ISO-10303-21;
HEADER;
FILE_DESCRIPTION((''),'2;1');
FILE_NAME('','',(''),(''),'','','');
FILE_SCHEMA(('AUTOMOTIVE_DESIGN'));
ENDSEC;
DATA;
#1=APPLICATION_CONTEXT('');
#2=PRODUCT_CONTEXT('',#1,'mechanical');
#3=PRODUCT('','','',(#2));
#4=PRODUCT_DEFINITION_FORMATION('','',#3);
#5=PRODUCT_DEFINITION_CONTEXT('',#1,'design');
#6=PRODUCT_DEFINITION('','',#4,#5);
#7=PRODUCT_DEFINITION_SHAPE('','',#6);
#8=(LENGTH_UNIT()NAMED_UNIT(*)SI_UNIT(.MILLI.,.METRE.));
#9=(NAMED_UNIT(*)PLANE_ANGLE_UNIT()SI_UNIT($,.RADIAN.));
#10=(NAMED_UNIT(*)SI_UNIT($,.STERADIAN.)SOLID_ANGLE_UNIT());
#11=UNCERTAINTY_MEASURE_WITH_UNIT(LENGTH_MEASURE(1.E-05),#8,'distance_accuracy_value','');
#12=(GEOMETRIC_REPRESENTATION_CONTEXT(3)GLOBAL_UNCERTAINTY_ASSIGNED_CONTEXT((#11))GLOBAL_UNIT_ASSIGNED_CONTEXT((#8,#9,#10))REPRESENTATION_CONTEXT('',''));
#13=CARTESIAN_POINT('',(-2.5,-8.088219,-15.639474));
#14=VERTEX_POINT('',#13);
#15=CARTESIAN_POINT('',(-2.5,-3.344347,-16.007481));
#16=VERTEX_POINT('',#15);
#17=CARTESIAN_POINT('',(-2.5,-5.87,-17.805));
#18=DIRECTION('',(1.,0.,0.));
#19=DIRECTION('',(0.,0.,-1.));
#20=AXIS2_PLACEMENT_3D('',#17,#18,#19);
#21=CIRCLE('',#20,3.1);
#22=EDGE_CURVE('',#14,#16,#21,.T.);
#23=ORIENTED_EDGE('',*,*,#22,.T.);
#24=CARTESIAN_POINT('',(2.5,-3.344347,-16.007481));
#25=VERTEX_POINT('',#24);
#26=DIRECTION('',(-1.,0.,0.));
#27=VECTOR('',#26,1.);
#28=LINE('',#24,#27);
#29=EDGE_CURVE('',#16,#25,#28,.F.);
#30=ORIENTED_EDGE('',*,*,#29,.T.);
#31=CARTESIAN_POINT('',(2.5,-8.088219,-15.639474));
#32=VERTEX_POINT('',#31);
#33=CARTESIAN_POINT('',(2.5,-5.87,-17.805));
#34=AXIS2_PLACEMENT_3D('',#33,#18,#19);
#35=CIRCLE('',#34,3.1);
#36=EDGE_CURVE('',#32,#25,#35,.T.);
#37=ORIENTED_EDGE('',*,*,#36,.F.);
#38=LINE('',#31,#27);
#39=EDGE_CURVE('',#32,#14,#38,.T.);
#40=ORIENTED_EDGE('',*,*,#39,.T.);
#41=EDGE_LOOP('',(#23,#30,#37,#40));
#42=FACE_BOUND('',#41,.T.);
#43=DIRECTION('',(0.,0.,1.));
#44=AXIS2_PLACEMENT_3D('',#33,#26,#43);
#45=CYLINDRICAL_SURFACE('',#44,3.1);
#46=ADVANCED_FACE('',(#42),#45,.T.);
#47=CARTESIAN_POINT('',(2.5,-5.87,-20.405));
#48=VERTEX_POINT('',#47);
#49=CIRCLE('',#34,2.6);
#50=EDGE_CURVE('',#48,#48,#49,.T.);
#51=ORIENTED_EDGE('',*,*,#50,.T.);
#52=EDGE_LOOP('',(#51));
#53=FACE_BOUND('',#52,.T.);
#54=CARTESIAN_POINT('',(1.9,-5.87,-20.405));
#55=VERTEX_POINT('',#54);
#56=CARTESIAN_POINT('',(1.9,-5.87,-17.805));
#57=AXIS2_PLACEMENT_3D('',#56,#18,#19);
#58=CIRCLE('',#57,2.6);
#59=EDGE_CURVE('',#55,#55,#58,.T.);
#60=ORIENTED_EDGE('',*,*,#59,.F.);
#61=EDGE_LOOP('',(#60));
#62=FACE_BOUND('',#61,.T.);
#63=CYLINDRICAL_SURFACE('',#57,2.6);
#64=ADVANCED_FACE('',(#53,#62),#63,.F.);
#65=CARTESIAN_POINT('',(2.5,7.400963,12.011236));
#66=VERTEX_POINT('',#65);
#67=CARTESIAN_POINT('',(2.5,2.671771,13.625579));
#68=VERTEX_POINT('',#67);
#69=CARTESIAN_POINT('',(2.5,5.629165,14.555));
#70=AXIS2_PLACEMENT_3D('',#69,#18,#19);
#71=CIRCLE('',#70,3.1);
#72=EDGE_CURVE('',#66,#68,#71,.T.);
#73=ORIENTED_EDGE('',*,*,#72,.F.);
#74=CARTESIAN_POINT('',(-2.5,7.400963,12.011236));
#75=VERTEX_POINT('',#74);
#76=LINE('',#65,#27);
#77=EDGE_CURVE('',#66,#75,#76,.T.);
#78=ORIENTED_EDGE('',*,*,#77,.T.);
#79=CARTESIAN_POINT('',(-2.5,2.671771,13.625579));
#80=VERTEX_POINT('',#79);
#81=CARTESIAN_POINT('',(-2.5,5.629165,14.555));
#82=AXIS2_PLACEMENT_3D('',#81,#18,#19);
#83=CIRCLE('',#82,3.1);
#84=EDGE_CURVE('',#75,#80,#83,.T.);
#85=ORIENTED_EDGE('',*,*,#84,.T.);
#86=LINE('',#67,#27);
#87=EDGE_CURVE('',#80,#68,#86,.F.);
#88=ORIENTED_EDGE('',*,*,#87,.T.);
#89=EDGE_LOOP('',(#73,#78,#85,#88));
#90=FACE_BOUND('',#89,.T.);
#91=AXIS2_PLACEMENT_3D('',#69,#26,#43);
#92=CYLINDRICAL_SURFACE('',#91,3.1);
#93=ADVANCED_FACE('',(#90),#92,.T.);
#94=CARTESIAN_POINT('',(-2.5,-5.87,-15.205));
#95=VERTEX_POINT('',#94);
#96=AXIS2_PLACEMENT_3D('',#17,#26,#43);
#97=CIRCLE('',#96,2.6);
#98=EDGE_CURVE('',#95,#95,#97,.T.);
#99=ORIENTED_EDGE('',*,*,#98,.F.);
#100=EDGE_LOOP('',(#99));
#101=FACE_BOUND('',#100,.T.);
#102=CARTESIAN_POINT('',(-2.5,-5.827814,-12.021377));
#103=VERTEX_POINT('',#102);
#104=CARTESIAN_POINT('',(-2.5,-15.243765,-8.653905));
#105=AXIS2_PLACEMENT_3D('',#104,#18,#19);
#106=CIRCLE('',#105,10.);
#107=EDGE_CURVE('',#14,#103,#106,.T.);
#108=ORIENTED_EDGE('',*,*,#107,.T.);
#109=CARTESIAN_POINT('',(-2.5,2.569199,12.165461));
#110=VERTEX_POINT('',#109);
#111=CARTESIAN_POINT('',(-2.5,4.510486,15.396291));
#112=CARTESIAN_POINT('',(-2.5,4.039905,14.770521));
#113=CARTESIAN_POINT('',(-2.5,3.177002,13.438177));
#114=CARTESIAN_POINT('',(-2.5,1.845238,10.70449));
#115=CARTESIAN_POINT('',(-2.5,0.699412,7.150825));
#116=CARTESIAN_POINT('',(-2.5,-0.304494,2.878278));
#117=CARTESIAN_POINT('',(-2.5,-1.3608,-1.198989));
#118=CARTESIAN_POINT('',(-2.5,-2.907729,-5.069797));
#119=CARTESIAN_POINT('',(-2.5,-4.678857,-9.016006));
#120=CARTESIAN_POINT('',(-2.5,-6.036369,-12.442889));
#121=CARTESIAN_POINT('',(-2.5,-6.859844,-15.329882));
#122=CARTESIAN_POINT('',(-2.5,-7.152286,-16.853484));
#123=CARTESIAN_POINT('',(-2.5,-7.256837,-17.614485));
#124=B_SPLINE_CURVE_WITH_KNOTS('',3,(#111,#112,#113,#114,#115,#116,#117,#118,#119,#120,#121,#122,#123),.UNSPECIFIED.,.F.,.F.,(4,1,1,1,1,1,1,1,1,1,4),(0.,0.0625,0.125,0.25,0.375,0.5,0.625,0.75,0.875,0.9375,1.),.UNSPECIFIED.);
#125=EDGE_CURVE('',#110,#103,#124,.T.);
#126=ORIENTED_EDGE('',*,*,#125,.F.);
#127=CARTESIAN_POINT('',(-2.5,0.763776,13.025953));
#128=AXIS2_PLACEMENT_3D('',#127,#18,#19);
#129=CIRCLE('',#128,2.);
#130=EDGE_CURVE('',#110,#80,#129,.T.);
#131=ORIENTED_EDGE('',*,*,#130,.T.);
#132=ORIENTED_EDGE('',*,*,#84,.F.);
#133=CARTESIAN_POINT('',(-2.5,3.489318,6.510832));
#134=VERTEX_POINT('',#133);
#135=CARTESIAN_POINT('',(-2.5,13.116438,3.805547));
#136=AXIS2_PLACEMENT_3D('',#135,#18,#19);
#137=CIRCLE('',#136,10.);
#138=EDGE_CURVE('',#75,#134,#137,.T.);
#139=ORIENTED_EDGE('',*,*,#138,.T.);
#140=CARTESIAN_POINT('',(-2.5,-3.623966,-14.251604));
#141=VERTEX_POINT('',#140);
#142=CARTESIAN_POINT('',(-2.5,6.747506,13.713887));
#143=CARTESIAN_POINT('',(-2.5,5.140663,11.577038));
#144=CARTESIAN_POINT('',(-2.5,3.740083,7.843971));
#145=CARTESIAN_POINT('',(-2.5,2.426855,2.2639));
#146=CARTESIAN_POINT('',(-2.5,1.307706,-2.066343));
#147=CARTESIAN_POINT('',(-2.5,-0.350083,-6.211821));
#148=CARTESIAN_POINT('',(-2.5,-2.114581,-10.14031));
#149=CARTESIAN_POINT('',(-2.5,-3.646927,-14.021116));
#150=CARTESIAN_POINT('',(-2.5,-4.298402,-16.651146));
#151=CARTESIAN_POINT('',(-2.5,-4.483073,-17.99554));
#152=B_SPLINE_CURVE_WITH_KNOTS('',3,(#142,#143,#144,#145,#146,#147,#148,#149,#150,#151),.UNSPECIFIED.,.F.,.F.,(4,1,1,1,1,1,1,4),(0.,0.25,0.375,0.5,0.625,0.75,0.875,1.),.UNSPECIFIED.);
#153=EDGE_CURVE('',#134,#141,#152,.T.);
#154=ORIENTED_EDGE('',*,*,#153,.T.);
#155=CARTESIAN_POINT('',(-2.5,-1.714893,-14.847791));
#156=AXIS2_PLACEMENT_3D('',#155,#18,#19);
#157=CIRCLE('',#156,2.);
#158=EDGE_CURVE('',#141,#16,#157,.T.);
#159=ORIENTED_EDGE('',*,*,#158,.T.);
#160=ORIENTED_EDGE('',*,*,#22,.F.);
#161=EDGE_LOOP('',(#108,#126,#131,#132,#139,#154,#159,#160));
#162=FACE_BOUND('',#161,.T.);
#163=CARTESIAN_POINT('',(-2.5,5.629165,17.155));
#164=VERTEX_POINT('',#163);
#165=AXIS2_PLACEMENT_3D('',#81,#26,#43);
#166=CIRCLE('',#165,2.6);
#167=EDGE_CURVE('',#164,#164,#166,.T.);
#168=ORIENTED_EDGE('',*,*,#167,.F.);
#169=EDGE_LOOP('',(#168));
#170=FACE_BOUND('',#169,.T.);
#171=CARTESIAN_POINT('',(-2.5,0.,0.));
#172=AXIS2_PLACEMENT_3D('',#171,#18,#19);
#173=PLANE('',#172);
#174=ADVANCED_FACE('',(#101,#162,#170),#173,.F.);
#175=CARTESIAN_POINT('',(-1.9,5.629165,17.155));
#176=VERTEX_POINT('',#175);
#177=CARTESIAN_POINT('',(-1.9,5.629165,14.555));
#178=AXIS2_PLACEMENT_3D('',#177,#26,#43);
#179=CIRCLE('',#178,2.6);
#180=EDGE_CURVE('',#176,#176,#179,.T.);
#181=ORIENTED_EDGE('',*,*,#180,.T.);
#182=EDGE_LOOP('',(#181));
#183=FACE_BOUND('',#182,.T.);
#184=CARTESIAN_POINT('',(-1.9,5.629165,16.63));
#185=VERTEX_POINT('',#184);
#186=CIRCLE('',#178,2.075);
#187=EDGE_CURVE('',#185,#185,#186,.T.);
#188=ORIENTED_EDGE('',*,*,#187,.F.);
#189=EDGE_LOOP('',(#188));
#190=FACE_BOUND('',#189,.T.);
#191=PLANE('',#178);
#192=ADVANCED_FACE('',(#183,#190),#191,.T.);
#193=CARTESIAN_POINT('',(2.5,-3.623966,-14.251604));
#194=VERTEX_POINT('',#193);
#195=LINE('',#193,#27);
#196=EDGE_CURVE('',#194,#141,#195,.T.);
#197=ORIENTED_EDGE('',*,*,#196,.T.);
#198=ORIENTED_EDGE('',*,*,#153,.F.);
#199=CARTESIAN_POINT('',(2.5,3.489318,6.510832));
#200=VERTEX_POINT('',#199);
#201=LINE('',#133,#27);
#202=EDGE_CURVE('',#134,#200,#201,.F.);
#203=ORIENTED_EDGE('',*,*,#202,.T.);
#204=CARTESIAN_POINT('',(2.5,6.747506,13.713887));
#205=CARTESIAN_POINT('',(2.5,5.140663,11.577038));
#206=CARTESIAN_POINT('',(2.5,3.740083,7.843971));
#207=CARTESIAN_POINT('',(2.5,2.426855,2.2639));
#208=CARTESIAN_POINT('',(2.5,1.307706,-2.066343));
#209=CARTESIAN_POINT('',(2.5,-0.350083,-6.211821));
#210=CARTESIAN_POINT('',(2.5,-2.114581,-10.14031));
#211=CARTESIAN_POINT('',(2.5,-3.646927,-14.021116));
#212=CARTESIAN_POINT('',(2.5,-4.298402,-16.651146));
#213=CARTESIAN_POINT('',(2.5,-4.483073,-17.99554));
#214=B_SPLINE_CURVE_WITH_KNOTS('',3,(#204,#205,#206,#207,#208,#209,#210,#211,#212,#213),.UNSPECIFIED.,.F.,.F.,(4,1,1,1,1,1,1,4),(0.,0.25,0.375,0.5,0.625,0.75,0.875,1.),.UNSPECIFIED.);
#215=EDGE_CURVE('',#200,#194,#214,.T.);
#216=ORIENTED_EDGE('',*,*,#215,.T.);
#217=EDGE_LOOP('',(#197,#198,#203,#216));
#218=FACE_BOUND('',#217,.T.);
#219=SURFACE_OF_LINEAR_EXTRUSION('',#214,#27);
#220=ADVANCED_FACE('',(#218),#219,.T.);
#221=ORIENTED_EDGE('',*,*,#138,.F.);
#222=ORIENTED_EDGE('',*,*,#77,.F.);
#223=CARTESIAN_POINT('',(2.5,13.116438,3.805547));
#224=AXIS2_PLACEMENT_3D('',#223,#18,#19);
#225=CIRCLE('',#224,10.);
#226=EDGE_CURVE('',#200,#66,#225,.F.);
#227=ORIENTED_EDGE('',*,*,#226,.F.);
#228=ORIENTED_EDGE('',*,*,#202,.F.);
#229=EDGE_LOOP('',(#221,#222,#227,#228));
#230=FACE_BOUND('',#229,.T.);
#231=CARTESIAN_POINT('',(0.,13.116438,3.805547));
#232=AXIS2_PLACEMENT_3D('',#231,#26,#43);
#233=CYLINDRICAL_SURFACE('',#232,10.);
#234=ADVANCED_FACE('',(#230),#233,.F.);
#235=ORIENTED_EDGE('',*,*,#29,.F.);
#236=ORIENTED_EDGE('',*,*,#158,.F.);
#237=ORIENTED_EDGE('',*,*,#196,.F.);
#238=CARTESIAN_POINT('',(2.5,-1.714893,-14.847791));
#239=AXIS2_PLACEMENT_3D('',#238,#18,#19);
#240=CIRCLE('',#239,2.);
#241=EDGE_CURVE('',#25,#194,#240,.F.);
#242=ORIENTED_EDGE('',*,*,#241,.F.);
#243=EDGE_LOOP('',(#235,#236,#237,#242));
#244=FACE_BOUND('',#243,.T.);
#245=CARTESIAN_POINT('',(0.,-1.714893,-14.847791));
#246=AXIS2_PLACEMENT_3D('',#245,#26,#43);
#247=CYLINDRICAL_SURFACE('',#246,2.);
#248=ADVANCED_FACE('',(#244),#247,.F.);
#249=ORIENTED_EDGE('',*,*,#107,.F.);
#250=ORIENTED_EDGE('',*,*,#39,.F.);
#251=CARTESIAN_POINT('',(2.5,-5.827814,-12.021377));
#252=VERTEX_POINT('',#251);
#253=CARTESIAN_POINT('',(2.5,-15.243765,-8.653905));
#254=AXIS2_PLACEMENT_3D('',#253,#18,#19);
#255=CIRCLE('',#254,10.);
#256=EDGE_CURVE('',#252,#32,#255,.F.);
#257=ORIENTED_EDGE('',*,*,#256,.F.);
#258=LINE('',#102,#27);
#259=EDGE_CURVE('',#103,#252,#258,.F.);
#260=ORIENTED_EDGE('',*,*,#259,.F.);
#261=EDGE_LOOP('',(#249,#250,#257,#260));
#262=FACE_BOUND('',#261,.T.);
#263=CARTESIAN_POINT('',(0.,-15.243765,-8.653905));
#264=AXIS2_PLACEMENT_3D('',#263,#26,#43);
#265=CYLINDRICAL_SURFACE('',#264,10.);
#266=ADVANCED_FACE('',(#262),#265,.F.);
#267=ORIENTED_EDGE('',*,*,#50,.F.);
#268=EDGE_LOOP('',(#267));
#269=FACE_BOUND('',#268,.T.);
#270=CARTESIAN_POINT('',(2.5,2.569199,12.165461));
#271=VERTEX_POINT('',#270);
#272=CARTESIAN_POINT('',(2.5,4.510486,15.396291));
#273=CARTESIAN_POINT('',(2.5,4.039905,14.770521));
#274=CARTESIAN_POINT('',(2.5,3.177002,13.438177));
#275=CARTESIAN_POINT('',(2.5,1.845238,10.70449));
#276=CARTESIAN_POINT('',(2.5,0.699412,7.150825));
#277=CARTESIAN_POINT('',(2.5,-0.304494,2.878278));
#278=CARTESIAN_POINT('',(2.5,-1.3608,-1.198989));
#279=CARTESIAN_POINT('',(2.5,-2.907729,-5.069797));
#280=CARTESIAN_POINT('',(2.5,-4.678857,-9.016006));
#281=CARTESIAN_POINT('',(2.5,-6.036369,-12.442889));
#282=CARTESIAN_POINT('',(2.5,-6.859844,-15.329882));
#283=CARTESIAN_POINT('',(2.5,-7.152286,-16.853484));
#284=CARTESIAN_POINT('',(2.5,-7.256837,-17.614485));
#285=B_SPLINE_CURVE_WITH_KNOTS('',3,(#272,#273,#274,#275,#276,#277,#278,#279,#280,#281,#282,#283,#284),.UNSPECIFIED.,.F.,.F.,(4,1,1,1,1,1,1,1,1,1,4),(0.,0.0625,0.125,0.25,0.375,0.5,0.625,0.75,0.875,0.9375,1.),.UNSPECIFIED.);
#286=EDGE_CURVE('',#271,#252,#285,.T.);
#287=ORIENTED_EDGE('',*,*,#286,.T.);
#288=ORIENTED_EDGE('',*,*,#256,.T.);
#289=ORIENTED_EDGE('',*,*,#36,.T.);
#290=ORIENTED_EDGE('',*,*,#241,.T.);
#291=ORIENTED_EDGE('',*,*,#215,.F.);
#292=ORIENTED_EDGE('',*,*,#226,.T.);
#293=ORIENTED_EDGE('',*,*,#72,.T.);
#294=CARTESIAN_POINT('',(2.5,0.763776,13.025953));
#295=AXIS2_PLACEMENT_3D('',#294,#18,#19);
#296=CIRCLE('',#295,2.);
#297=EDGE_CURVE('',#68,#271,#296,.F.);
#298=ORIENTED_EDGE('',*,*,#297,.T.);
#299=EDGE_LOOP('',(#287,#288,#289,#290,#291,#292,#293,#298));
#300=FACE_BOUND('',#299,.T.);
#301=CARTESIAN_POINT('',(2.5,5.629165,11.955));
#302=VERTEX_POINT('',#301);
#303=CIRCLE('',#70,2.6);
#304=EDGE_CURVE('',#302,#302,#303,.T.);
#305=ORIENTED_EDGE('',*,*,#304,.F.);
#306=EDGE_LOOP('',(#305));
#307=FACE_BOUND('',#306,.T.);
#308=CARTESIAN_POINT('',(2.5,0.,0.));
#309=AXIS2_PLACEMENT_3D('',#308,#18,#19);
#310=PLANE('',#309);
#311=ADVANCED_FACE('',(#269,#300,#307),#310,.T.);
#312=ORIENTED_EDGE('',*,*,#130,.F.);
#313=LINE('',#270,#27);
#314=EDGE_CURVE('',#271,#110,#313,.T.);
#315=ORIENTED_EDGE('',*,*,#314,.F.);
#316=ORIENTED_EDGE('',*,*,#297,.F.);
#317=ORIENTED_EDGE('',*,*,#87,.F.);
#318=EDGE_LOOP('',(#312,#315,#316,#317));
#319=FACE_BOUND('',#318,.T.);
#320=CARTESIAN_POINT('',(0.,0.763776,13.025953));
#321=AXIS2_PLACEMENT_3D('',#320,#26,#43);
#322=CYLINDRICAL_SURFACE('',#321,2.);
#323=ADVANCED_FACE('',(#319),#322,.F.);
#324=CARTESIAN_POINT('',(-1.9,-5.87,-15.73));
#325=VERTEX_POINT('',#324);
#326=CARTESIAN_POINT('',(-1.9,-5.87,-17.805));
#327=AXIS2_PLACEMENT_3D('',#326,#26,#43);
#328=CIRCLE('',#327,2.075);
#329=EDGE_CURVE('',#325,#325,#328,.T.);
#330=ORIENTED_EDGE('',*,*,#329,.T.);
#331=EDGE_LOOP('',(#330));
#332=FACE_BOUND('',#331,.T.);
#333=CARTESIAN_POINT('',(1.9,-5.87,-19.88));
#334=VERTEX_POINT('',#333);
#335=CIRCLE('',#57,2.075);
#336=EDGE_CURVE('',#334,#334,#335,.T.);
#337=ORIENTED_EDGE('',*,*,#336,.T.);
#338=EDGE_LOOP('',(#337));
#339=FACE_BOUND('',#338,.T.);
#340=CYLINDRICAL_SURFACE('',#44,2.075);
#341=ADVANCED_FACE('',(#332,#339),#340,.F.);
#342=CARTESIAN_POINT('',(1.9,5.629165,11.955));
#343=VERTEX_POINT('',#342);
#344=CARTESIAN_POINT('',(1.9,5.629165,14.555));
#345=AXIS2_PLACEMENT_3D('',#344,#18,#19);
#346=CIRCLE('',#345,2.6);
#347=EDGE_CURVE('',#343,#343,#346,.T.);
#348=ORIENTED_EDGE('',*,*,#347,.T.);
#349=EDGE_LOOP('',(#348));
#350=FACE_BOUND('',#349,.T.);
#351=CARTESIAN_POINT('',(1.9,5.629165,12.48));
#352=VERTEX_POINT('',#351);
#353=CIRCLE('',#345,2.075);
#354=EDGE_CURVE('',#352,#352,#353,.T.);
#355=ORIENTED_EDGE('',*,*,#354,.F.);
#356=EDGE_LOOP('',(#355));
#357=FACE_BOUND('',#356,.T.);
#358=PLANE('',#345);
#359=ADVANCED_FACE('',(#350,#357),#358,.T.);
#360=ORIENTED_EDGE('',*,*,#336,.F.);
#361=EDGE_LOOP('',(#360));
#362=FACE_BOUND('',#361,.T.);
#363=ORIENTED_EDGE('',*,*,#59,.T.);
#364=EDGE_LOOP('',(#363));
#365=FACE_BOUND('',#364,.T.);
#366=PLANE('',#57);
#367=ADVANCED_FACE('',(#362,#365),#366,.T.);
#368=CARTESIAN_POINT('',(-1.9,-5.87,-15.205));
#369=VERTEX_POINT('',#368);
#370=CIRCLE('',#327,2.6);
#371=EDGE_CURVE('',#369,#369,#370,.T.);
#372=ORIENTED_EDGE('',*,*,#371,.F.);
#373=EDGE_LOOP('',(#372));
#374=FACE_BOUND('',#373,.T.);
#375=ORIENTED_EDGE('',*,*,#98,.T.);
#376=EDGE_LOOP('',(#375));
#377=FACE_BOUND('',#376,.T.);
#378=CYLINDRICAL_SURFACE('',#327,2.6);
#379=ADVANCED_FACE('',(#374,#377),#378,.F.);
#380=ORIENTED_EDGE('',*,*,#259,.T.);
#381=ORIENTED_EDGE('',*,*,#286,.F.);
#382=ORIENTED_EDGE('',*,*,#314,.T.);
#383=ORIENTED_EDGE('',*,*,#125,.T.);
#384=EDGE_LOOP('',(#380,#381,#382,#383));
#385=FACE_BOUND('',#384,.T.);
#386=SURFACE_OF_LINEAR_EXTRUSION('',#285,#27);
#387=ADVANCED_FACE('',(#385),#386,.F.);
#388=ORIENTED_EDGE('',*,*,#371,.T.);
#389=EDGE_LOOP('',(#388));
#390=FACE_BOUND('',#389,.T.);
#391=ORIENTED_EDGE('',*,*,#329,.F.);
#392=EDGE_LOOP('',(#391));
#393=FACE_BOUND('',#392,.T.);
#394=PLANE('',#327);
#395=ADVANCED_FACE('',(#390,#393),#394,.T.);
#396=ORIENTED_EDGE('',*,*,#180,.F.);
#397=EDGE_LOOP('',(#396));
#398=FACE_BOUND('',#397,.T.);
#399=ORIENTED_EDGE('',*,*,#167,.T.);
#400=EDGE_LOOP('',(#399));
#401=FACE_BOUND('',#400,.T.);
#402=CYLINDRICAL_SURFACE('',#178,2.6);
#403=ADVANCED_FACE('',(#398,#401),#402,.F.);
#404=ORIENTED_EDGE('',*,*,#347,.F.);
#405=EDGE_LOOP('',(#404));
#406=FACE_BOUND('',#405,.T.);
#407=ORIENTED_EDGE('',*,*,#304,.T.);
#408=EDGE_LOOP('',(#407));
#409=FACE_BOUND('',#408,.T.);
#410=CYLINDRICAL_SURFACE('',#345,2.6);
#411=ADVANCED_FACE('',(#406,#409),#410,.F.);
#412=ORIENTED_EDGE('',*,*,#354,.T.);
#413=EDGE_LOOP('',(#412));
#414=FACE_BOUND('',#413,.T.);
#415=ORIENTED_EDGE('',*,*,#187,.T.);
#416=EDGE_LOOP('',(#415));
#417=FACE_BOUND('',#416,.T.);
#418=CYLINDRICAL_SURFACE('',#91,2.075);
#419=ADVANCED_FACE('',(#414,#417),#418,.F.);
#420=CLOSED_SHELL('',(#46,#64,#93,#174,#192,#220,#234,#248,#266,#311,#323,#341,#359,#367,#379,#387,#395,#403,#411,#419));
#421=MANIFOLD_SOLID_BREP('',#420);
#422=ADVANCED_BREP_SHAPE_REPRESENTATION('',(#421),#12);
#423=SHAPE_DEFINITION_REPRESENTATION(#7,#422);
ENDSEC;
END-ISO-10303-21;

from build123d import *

# Parameters (mm, degrees)
BOSS_EXTRUDE1_START     = -2.5
BOSS_EXTRUDE1_OUTLINE_R = 2.075
BOSS_EXTRUDE1_DEPTH     = 5
FILLET1_R               = 10
FILLET2_R               = 2
SKETCH6_R               = 2.6
CUT_EXTRUDE3_DEPTH      = 0.6
CUT_EXTRUDE4_START      = -0.6
SKETCH7_R               = 2.6
CUT_EXTRUDE4_DEPTH      = 0.6


# Read off the part's stored shape, not the designer's step: Boss-Extrude1
with BuildPart() as part:
    # Boss-Extrude1 outline → Boss-Extrude1 (new body)
    with BuildSketch(Plane(origin=(0, 0, 0), x_dir=(0, 0, -1), z_dir=(1, 0, 0)).offset(BOSS_EXTRUDE1_START)):
        with BuildLine():
            add(Edge.make_bspline(
                [(-11.467759302, 5.348193827), (-9.897325632, 4.539306529), (-6.914913615, 3.521436488), (-2.263899905, 2.426855128), (2.06634335, 1.307705864), (6.2118215, -0.350082751), (10.140310372, -2.114581028), (13.169191833, -3.310542475), (14.923737301, -3.829233653), (15.372310037, -3.948537134)],
                knots=[0.083247791, 0.083247791, 0.083247791, 0.083247791, 0.25, 0.375, 0.5, 0.625, 0.75, 0.875, 0.917679059, 0.917679059, 0.917679059, 0.917679059], degree=3))
            ThreePointArc((-11.467759302, 5.348193827), (-17.179981816, 7.278246829), (-12.961908872, 2.969830498))
            add(Edge.make_bspline(
                [(-12.961908872, 2.969830498), (-12.439456061, 2.692527792), (-10.540790951, 1.792456097), (-7.150824595, 0.699411978), (-2.87827779, -0.304494056), (1.198988752, -1.360799538), (5.069797155, -2.90772863), (9.016006033, -4.678857357), (12.277896091, -5.971009628), (14.261338764, -6.553588571), (14.817570219, -6.697806322)],
                knots=[0.076895227, 0.076895227, 0.076895227, 0.076895227, 0.125, 0.25, 0.375, 0.5, 0.625, 0.75, 0.875, 0.922454156, 0.922454156, 0.922454156, 0.922454156], degree=3))
            ThreePointArc((14.817570219, -6.697806322), (20.84375711, -6.483151878), (15.372310037, -3.948537134))
        make_face()
        with Locations((17.805, -5.87)):
            Circle(BOSS_EXTRUDE1_OUTLINE_R, mode=Mode.SUBTRACT)
        with Locations((-14.555, 5.629165125)):
            Circle(BOSS_EXTRUDE1_OUTLINE_R, mode=Mode.SUBTRACT)
    extrude(amount=BOSS_EXTRUDE1_DEPTH)

    # Fillet1
    fillet1_edges = [part.edges().sort_by_distance(p)[0] for p in [
        (0, -6.697806322, -14.817570219),
        (0, 5.348193827, 11.467759302),
    ]]
    fillet(fillet1_edges, radius=FILLET1_R)

    # Fillet2
    fillet2_edges = [part.edges().sort_by_distance(p)[0] for p in [
        (0, -3.948537134, -15.372310037),
        (0, 2.969830498, 12.961908872),
    ]]
    fillet(fillet2_edges, radius=FILLET2_R)

    # Sketch6 → Cut-Extrude3 (cut)
    with BuildSketch(Plane(origin=(2.5, 0, 0), x_dir=(0, 0, -1), z_dir=(1, 0, 0))):
        with Locations((-14.555, 5.629165125)):
            Circle(SKETCH6_R)
        with Locations((17.805, -5.87)):
            Circle(SKETCH6_R)
    extrude(amount=-CUT_EXTRUDE3_DEPTH, mode=Mode.SUBTRACT)

    # Sketch7 → Cut-Extrude4 (cut)
    with BuildSketch(Plane.ZY.offset(2.5).offset(CUT_EXTRUDE4_START)):
        with Locations(Location((14.555, 5.629165125, 0), (0, 0, 180))):
            Circle(SKETCH7_R)
        with Locations(Location((-17.805, -5.87, 0), (0, 0, 180))):
            Circle(SKETCH7_R)
    extrude(amount=CUT_EXTRUDE4_DEPTH, mode=Mode.SUBTRACT)


solid = part.part
